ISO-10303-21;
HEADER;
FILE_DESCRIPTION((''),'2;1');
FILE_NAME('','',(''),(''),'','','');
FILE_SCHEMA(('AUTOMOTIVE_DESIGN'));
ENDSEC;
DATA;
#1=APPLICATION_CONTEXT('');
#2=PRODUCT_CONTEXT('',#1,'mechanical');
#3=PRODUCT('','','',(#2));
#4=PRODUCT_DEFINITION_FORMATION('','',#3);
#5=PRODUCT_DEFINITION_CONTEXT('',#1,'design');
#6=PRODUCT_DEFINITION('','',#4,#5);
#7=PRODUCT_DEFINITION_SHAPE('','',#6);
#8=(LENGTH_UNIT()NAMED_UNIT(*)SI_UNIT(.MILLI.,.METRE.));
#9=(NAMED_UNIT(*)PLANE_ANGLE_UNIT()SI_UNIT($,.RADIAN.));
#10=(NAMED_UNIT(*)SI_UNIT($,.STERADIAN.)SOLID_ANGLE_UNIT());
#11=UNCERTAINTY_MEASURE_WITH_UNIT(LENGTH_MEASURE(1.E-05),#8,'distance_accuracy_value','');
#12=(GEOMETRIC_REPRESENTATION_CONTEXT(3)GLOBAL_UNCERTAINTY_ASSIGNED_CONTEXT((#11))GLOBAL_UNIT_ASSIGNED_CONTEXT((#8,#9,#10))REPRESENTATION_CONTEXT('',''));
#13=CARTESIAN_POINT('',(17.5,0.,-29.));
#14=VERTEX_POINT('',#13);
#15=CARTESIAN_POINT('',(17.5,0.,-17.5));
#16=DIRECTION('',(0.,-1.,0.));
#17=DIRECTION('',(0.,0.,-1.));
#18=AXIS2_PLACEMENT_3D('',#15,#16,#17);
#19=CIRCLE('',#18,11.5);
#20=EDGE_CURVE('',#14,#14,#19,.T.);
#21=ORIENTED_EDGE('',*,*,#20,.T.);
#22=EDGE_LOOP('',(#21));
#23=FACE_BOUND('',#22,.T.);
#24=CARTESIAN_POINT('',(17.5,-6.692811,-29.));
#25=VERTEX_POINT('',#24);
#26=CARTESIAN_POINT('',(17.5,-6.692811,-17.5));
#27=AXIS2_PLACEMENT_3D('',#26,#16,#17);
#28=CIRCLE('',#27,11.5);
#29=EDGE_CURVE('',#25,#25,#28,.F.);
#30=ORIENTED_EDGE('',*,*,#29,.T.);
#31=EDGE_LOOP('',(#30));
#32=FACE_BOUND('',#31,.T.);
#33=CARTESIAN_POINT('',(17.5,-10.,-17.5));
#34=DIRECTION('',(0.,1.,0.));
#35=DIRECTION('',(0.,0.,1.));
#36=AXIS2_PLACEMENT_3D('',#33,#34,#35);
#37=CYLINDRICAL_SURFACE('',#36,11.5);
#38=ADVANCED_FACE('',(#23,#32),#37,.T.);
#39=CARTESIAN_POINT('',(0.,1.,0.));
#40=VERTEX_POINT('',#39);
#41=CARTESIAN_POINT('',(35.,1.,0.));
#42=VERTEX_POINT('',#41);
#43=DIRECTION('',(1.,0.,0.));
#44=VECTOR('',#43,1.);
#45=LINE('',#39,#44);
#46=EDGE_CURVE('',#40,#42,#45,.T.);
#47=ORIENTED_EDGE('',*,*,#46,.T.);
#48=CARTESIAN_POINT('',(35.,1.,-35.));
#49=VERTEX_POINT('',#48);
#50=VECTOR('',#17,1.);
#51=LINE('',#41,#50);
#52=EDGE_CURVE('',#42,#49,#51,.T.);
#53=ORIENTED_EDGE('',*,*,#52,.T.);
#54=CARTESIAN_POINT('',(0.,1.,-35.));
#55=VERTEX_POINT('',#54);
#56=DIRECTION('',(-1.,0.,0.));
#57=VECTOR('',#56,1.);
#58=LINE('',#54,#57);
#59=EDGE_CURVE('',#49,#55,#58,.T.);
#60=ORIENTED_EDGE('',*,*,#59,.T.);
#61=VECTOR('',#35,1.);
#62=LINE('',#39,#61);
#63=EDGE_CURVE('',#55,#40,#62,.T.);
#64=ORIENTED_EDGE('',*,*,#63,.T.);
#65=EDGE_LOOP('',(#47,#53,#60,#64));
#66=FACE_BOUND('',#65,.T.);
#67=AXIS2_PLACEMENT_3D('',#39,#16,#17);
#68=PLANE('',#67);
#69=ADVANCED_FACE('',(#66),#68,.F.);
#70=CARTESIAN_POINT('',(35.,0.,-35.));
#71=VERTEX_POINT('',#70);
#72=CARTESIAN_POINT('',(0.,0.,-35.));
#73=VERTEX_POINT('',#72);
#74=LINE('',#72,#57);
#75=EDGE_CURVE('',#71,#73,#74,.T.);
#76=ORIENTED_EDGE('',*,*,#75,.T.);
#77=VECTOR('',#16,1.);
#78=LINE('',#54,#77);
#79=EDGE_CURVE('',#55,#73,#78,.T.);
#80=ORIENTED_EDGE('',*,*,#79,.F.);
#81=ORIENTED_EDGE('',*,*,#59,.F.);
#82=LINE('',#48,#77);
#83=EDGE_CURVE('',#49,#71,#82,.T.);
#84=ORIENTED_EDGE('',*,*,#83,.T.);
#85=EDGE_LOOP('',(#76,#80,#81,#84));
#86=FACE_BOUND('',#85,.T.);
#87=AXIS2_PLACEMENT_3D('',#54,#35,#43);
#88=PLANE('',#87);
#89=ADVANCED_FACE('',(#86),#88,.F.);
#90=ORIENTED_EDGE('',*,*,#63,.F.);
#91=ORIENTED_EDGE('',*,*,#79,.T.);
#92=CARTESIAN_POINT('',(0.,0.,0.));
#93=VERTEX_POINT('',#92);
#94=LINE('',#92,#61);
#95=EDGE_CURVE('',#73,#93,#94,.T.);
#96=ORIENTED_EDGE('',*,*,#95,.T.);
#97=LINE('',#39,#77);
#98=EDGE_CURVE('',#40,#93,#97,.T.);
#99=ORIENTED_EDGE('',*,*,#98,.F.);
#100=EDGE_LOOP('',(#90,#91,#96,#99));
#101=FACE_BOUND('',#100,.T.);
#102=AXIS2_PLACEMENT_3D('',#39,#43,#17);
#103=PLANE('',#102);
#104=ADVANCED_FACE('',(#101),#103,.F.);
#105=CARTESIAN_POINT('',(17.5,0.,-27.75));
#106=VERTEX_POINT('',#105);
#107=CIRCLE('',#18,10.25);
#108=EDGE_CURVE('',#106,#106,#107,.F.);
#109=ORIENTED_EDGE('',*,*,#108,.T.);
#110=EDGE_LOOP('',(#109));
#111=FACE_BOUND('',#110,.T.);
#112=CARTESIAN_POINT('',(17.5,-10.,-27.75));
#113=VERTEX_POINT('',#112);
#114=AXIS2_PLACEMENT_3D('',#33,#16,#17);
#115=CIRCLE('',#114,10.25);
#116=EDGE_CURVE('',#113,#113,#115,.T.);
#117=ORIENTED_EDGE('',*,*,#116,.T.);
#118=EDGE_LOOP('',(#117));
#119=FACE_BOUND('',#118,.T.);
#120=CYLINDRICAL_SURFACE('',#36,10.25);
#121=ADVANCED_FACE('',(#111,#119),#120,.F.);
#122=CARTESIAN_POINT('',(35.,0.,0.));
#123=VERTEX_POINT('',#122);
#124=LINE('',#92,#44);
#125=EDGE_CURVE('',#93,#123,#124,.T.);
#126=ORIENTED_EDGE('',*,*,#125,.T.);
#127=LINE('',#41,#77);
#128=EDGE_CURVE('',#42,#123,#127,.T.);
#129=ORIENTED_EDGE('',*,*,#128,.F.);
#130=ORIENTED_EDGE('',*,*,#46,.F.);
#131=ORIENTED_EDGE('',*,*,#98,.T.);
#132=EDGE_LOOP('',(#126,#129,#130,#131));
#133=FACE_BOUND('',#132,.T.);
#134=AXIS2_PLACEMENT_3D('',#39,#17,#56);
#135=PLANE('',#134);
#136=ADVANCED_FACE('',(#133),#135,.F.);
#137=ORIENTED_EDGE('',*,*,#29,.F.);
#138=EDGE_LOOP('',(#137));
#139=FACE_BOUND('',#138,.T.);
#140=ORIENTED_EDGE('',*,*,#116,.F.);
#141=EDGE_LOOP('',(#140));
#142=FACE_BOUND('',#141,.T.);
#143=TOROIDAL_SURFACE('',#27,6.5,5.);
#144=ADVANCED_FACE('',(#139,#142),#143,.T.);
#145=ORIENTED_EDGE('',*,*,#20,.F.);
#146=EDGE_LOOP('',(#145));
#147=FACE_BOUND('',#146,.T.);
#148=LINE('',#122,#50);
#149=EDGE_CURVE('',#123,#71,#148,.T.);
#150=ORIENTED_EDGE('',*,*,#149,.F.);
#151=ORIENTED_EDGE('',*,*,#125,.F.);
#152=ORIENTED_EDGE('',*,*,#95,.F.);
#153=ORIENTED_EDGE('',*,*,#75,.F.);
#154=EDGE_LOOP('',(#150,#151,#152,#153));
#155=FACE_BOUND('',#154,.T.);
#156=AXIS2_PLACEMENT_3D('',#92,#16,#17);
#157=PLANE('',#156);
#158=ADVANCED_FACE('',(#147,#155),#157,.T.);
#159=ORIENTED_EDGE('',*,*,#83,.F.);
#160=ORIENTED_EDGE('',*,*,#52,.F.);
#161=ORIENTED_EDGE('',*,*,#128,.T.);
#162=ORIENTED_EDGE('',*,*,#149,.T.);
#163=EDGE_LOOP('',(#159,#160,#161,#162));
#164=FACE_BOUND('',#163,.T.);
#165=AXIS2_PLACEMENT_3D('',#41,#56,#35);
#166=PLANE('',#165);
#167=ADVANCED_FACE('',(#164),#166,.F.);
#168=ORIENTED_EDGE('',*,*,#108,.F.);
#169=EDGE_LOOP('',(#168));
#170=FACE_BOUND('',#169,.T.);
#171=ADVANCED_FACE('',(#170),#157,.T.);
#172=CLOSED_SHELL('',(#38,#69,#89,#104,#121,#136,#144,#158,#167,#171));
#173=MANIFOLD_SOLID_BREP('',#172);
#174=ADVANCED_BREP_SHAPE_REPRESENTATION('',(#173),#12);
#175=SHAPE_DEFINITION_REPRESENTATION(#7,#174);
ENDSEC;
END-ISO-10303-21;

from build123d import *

# Parameters (mm, degrees)
SKETCH1_W           = 35
SKETCH1_H           = 35
BOSS_EXTRUDE1_DEPTH = 1
SKETCH3_R           = 11.5
SKETCH3_R_2         = 10.25
BOSS_EXTRUDE3_DEPTH = 10
FILLET1_R           = 5


with BuildPart() as part:
    # Sketch1 → Boss-Extrude1 (new body)
    with BuildSketch(Plane(origin=(0, 0, 0), x_dir=(1, 0, 0), z_dir=(0, 1, 0))):
        with Locations((17.5, 17.5)):
            Rectangle(SKETCH1_W, SKETCH1_H)
    extrude(amount=BOSS_EXTRUDE1_DEPTH)

    # Sketch3 → Boss-Extrude3 (add)
    with BuildSketch(Plane.XZ):
        with Locations(Location((17.5, -17.5, 0), (0, 0, 270))):
            Circle(SKETCH3_R)
        with Locations(Location((17.5, -17.5, 0), (0, 0, 270))):
            Circle(SKETCH3_R_2, mode=Mode.SUBTRACT)
    extrude(amount=BOSS_EXTRUDE3_DEPTH)

    # Fillet1
    # the kernel refuses this fillet: 5 mm, written as the material it takes off along each edge
    with BuildSketch(Plane(origin=(17.5, -10, -17.5), x_dir=(0, 0, -1), z_dir=(-1, 0, 0))) as fillet1_piece_1:
        with BuildLine():
            CenterArc((6.5, -3.307189139), FILLET1_R, 0, 41.409622109)
            Line((10.25, 0), (10.325, 0.066143783))
            ThreePointArc((10.325, 0.066143783), (10.875, 0.1), (11.5, 0.1))
            Line((11.5, 0.1), (11.6, 0))
            Line((11.6, 0), (11.6, -3.307189139))
            Line((11.6, -3.307189139), (11.5, -3.307189139))
        make_face()
    revolve(axis=Axis((17.5, -10, -17.5), (0, -1, 0)), mode=Mode.SUBTRACT)


solid = part.part
